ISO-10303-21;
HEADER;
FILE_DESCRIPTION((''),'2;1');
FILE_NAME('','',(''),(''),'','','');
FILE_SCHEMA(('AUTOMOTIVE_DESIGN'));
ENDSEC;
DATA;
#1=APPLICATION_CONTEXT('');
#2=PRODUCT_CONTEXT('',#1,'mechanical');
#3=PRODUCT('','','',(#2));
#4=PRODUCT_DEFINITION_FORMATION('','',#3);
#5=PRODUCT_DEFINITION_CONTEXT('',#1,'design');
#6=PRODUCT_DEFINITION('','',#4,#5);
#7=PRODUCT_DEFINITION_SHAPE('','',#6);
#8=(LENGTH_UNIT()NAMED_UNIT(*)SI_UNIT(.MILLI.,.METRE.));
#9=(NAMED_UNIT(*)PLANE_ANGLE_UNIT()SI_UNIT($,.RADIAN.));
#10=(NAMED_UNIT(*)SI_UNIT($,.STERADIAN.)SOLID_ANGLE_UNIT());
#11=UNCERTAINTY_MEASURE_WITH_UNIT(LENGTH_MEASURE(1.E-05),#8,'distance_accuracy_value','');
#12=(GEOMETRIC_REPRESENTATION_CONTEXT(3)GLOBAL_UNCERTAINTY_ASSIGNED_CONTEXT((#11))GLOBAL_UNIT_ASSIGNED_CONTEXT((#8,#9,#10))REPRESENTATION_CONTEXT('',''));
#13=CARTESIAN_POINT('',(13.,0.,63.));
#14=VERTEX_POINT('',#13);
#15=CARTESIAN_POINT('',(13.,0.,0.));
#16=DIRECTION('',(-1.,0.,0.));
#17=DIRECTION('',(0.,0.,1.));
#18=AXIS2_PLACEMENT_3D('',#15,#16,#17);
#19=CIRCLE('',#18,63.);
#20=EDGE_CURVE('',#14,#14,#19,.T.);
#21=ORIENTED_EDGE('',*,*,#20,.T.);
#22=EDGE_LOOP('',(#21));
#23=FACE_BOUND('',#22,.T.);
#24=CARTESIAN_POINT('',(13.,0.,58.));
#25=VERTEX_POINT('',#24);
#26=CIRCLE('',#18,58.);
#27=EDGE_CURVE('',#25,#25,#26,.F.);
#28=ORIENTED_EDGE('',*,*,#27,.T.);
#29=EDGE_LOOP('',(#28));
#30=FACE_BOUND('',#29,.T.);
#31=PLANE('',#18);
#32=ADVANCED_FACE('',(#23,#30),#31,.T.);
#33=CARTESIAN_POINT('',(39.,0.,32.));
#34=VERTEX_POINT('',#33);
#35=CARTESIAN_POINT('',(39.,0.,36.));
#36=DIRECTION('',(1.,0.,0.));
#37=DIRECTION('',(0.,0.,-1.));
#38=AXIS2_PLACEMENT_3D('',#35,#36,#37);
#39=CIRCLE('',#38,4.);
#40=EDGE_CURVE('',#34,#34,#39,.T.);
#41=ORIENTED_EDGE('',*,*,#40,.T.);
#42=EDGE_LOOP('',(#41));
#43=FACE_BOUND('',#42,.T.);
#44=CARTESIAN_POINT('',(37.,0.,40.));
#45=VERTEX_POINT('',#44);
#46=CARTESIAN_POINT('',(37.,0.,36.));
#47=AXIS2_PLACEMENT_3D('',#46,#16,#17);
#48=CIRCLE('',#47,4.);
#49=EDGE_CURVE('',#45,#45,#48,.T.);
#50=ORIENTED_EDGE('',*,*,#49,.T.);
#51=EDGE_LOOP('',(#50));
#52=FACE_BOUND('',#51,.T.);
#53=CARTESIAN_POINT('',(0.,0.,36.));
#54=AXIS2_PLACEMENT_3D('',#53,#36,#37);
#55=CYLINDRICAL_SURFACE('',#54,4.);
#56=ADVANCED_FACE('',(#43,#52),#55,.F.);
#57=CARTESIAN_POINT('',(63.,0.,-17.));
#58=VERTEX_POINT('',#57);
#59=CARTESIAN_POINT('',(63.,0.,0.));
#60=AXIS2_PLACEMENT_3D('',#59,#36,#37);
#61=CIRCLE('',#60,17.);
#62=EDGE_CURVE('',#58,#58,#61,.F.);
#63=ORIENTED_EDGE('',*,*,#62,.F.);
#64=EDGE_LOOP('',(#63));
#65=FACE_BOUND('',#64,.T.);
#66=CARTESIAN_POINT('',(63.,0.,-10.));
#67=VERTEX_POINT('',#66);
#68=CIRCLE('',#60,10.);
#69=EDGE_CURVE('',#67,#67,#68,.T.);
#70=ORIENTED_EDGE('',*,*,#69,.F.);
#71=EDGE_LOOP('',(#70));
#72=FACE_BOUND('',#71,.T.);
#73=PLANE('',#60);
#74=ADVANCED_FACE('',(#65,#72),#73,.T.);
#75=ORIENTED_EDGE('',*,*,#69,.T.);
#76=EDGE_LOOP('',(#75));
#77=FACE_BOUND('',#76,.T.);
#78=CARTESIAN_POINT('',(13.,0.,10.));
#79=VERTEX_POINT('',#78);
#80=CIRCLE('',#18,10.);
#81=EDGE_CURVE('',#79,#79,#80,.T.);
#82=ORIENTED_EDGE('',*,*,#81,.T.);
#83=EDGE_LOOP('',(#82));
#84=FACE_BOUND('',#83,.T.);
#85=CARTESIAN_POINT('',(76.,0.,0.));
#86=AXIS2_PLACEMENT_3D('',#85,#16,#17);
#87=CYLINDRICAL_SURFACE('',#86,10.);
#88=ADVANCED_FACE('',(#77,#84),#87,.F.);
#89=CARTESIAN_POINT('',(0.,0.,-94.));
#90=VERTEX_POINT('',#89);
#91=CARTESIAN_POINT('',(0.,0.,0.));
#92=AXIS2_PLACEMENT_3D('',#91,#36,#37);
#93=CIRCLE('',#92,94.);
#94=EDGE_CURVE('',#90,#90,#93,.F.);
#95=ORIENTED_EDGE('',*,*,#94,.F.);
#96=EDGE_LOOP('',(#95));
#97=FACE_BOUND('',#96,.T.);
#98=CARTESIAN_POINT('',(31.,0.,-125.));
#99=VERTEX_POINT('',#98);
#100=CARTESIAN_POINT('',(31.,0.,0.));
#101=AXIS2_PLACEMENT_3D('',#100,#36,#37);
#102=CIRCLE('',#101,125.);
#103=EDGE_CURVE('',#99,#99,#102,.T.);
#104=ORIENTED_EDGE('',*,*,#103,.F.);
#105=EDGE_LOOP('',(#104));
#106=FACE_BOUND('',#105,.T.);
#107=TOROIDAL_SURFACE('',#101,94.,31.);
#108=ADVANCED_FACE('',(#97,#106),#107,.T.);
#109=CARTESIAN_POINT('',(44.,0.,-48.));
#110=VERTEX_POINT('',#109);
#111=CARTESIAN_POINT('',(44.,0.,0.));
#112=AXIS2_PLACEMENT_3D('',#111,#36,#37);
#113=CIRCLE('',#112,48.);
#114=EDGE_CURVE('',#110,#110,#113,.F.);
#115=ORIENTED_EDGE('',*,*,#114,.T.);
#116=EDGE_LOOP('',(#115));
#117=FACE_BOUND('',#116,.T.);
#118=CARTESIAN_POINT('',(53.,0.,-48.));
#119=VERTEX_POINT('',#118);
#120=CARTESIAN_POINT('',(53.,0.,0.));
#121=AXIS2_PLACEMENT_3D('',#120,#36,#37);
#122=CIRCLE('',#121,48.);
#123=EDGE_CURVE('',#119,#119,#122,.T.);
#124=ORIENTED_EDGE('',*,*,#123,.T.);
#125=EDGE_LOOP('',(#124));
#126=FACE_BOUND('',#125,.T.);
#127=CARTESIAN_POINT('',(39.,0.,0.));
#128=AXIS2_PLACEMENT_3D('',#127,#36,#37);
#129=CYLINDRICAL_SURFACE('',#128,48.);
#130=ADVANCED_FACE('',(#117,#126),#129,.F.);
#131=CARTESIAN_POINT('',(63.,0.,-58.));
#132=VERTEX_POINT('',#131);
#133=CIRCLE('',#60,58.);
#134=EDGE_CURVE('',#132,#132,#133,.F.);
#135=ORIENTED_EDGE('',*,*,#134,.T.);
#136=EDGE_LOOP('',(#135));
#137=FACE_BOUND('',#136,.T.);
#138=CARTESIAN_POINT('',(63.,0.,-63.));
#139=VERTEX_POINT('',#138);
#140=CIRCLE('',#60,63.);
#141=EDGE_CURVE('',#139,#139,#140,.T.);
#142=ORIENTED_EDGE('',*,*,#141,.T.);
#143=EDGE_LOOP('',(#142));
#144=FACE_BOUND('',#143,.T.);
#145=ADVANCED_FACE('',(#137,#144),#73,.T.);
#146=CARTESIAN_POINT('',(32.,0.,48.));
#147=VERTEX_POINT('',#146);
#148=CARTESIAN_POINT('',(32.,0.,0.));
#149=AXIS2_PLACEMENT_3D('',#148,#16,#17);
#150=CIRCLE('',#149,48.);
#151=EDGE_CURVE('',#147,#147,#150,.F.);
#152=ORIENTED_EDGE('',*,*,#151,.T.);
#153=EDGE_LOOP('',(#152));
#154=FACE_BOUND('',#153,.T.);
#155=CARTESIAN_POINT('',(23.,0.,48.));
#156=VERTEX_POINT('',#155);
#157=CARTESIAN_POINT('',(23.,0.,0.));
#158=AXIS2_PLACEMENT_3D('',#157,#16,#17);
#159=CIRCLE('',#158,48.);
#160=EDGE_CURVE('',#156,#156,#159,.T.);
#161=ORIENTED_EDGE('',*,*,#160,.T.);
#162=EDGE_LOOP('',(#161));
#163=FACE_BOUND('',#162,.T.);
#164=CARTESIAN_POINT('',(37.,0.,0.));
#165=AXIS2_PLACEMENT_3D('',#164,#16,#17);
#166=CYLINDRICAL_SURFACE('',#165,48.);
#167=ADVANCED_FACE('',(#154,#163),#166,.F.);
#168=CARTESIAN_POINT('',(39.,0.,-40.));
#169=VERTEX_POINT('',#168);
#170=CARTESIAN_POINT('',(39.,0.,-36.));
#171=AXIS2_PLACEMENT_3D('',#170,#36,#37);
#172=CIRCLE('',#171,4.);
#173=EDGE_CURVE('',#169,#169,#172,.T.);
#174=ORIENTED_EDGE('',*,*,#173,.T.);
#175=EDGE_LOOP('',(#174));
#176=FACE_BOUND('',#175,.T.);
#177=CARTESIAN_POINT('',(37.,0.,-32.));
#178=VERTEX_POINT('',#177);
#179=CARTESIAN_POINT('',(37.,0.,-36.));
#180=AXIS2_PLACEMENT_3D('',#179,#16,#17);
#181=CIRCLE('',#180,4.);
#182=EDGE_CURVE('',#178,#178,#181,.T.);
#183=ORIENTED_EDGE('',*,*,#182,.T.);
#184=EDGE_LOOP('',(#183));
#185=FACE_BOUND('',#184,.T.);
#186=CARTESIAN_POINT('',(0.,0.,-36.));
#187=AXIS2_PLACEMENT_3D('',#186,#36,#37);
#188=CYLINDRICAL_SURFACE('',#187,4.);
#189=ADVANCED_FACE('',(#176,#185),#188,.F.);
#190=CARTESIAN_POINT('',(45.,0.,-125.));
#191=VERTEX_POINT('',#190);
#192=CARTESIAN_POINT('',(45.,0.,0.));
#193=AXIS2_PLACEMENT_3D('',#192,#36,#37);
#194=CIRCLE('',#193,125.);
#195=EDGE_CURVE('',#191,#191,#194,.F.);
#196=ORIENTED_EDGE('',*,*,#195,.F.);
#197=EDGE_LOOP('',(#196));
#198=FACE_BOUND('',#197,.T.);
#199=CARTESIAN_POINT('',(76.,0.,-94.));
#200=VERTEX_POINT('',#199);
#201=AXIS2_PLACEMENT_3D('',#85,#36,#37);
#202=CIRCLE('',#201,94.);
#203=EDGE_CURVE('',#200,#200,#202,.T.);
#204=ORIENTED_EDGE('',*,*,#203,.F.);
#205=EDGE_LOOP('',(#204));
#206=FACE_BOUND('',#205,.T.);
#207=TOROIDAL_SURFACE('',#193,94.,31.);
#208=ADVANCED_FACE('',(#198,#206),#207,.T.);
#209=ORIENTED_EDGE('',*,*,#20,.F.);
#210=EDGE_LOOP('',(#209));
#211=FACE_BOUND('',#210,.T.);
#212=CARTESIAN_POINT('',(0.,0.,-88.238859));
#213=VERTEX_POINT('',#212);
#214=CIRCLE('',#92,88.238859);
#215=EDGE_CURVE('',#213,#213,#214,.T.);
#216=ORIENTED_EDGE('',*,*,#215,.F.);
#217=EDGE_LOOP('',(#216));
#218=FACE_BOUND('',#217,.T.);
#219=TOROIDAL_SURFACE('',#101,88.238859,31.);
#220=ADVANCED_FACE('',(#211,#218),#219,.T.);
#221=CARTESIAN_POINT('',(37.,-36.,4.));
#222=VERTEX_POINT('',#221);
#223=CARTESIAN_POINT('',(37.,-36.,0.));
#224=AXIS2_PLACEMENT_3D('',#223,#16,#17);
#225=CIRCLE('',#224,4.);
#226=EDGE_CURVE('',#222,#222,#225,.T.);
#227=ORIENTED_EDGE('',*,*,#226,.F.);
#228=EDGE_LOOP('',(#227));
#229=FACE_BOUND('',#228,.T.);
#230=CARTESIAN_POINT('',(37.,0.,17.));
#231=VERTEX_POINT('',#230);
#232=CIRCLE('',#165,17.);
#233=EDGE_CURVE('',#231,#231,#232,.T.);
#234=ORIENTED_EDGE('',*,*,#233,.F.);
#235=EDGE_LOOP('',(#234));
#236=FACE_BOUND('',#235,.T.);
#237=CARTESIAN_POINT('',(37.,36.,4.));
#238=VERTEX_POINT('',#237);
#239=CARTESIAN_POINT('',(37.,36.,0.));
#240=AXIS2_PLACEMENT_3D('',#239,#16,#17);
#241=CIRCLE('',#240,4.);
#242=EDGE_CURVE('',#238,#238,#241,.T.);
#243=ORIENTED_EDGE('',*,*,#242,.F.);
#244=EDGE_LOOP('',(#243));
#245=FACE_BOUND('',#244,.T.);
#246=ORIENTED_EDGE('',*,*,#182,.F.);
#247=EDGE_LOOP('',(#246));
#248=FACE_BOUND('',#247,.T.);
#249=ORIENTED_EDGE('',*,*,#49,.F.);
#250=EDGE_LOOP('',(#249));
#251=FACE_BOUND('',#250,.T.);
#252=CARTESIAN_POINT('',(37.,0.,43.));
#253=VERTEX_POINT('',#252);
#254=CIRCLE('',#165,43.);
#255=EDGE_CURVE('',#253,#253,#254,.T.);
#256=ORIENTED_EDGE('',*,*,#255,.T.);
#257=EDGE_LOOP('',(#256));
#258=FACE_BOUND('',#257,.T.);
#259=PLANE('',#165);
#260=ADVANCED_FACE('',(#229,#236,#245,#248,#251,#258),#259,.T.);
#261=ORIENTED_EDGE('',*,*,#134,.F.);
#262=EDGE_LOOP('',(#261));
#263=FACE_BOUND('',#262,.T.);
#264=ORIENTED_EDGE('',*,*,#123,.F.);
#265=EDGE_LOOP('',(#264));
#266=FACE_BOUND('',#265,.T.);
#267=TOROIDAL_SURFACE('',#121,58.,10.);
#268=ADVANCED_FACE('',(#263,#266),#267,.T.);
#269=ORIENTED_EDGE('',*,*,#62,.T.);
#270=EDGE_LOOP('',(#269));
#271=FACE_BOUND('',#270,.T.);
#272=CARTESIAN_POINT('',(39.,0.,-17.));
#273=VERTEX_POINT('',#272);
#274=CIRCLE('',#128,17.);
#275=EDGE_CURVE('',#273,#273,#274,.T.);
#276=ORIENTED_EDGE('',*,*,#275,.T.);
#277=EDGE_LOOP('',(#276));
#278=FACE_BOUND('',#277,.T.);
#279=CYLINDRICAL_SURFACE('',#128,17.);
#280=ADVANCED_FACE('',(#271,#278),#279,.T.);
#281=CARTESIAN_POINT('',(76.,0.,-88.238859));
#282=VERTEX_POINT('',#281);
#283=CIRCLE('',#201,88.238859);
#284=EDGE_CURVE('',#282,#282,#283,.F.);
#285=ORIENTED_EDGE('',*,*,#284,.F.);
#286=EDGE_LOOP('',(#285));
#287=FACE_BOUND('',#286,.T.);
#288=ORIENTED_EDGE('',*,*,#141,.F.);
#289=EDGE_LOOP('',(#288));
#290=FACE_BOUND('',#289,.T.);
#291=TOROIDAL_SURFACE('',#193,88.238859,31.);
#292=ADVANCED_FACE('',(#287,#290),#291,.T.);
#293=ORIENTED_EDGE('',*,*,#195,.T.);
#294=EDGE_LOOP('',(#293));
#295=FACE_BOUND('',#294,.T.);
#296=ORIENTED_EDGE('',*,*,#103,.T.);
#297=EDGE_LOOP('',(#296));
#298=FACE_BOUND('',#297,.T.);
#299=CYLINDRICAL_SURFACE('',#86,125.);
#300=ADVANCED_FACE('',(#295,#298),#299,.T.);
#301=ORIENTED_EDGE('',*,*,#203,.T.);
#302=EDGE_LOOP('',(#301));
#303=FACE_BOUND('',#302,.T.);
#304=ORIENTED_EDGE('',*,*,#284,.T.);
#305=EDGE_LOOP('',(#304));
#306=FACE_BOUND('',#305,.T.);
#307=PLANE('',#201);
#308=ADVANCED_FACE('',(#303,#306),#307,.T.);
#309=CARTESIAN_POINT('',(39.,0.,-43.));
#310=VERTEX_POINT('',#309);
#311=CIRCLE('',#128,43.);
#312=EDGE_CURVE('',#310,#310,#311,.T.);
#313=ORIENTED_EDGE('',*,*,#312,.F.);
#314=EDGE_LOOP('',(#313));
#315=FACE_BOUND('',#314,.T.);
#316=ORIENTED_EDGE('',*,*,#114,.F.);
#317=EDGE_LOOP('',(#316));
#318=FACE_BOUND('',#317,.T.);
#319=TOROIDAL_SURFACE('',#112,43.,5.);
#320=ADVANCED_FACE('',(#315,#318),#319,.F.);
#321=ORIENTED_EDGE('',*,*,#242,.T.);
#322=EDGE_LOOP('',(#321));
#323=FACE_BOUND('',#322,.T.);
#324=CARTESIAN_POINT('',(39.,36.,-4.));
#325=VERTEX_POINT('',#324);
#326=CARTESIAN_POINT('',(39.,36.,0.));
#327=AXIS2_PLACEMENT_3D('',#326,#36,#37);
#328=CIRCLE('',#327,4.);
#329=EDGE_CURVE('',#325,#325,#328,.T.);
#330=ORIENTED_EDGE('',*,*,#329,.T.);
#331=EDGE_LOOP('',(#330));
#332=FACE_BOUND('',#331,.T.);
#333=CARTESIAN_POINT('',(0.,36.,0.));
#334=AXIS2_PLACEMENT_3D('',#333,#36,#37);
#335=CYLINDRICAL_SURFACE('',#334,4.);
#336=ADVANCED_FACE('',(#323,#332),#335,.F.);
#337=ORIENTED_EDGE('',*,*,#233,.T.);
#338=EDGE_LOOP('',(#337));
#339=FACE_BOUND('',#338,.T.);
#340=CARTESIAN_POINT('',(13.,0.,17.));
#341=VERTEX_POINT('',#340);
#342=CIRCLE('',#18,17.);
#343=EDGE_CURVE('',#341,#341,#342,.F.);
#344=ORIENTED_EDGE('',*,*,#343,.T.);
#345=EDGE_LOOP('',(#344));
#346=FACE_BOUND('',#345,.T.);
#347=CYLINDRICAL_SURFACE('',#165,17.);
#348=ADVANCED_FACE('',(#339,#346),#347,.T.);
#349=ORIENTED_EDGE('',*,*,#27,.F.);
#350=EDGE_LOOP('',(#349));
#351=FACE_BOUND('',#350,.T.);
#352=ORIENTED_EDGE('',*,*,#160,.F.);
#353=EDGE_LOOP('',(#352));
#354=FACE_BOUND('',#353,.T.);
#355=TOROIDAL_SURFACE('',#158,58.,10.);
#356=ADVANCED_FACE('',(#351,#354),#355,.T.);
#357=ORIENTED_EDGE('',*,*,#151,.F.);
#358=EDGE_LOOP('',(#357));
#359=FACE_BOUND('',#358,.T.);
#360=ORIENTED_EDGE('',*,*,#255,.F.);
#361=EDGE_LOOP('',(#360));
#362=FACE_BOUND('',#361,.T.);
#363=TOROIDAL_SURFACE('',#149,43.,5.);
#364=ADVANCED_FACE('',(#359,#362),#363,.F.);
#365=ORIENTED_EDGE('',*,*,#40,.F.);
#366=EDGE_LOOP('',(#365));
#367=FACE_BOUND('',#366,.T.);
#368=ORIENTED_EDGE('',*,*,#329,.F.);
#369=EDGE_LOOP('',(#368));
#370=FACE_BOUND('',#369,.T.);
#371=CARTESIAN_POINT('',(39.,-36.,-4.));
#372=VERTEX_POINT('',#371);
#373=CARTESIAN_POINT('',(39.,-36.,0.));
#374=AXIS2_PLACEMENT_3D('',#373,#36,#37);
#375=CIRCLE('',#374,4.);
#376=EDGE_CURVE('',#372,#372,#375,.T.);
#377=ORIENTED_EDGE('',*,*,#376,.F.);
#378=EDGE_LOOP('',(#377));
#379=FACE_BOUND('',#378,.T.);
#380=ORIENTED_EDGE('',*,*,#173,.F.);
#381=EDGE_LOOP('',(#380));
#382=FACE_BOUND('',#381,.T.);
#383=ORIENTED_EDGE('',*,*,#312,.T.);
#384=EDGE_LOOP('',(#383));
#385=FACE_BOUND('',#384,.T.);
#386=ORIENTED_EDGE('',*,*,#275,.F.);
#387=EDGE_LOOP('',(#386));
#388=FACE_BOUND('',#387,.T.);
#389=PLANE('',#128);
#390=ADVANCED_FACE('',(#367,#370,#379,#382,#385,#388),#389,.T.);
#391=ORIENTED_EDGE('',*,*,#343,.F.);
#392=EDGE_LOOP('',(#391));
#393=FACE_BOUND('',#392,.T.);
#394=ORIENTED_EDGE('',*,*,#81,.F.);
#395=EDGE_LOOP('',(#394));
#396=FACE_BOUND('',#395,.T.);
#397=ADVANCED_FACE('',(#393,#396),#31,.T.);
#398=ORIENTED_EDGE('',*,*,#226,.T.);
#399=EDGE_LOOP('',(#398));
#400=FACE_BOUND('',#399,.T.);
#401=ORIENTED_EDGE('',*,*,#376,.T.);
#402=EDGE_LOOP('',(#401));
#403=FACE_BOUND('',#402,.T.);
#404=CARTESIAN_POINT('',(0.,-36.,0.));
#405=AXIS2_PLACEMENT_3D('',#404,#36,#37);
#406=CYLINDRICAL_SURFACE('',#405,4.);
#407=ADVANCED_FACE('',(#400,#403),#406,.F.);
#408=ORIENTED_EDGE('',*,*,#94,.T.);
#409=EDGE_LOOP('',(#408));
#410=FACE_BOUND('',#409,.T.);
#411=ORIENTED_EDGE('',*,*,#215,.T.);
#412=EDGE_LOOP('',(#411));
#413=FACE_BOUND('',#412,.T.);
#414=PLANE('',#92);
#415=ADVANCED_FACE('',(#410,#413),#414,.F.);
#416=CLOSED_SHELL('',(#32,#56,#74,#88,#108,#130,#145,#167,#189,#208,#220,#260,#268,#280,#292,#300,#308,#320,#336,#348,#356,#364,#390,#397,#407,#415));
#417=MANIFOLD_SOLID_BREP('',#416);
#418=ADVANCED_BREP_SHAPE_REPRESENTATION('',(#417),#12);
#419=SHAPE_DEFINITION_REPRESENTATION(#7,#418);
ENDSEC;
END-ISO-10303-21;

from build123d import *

# Parameters (mm, degrees)
SKETCH1_R           = 125
SKETCH1_R_2         = 10
BOSS_EXTRUDE1_DEPTH = 76
SKETCH2_R           = 48
SKETCH2_R_2         = 17
CUT_EXTRUDE1_DEPTH  = 37
CUT_EXTRUDE2_START  = -37
SKETCH3_R           = 48
SKETCH3_R_2         = 17
CUT_EXTRUDE2_DEPTH  = 37
SKETCH4_R           = 63
CUT_EXTRUDE3_DEPTH  = 13
CUT_EXTRUDE4_START  = -13
SKETCH5_R           = 63
CUT_EXTRUDE4_DEPTH  = 13
SKETCH6_R           = 4
CUT_EXTRUDE5_DEPTH  = 182.027622202
FILLET1_R           = 31
FILLET2_R           = 31
FILLET3_R           = 10
FILLET4_R           = 5


with BuildPart() as part:
    # Sketch1 → Boss-Extrude1 (new body)
    with BuildSketch(Plane(origin=(0, 0, 0), x_dir=(0, 0, -1), z_dir=(1, 0, 0))):
        Circle(SKETCH1_R)
        Circle(SKETCH1_R_2, mode=Mode.SUBTRACT)
    extrude(amount=BOSS_EXTRUDE1_DEPTH)

    # Sketch2 → Cut-Extrude1 (cut)
    with BuildSketch(Plane(origin=(76, 0, 0), x_dir=(0, 0, -1), z_dir=(1, 0, 0))):
        Circle(SKETCH2_R)
        Circle(SKETCH2_R_2, mode=Mode.SUBTRACT)
    extrude(amount=-CUT_EXTRUDE1_DEPTH, mode=Mode.SUBTRACT)

    # Sketch3 → Cut-Extrude2 (cut)
    with BuildSketch(Plane.ZY.offset(CUT_EXTRUDE2_START)):
        with Locations(Location((0, 0, 0), (0, 0, 180))):
            Circle(SKETCH3_R)
        with Locations(Location((0, 0, 0), (0, 0, 180))):
            Circle(SKETCH3_R_2, mode=Mode.SUBTRACT)
    extrude(amount=CUT_EXTRUDE2_DEPTH, mode=Mode.SUBTRACT)

    # Sketch4 → Cut-Extrude3 (cut)
    with BuildSketch(Plane.ZY):
        Circle(SKETCH4_R)
    extrude(amount=-CUT_EXTRUDE3_DEPTH, mode=Mode.SUBTRACT)

    # Sketch5 → Cut-Extrude4 (cut)
    with BuildSketch(Plane(origin=(76, 0, 0), x_dir=(0, 0, -1), z_dir=(1, 0, 0)).offset(CUT_EXTRUDE4_START)):
        with Locations(Location((0, 0, 0), (0, 0, 180))):
            Circle(SKETCH5_R)
    extrude(amount=CUT_EXTRUDE4_DEPTH, mode=Mode.SUBTRACT)

    # Sketch6 → Cut-Extrude5 (cut, through all)
    with BuildSketch(Plane(origin=(39, 0, 0), x_dir=(0, 0, -1), z_dir=(1, 0, 0))):
        with Locations((0, 36)):
            Circle(SKETCH6_R)
        with Locations((36, 0)):
            Circle(SKETCH6_R)
        with Locations((0, -36)):
            Circle(SKETCH6_R)
        with Locations((-36, 0)):
            Circle(SKETCH6_R)
    extrude(amount=-CUT_EXTRUDE5_DEPTH, mode=Mode.SUBTRACT)

    # Fillet1
    # the kernel refuses this fillet: 31 mm, written as the material it takes off along each edge
    with BuildSketch(Plane(origin=(76, 0, 0), x_dir=(0, 0, 1), z_dir=(0, 1, 0))) as fillet1_piece_1:
        with BuildLine():
            CenterArc((88.238858928, -31), FILLET1_R, 90, 54.50406735)
            Line((63, -13), (62.495222821, -12.64))
            ThreePointArc((62.495222821, -12.64), (62.38, -6.5), (62.38, 0))
            Line((62.38, 0), (63, 0.62))
            Line((63, 0.62), (88.238858928, 0.62))
            Line((88.238858928, 0.62), (88.238858928, 0))
        make_face()
    revolve(axis=Axis((76, 0, 0), (1, 0, 0)), mode=Mode.SUBTRACT)
    with BuildSketch(Plane(origin=(76, 0, 0), x_dir=(0, 0, -1), z_dir=(0, -1, 0))) as fillet1_piece_2:
        with BuildLine():
            CenterArc((125 - FILLET1_R, -FILLET1_R), FILLET1_R, 0, 90)
            Line((125 - FILLET1_R, 0), (125 - FILLET1_R, FILLET1_R * 0.02))
            Line((125 - FILLET1_R, FILLET1_R * 0.02), (125 + FILLET1_R * 0.02, FILLET1_R * 0.02))
            Line((125 + FILLET1_R * 0.02, FILLET1_R * 0.02), (125 + FILLET1_R * 0.02, -FILLET1_R))
            Line((125 + FILLET1_R * 0.02, -FILLET1_R), (125, -FILLET1_R))
        make_face()
    revolve(axis=Axis((76, 0, 0), (1, 0, 0)), mode=Mode.SUBTRACT)

    # Fillet2
    # the kernel refuses this fillet: 31 mm, written as the material it takes off along each edge
    with BuildSketch(Plane(origin=(0, 0, 0), x_dir=(0, 0, -1), z_dir=(0, -1, 0))) as fillet2_piece_1:
        with BuildLine():
            CenterArc((125 - FILLET2_R, FILLET2_R), FILLET2_R, 270, 90)
            Line((125 - FILLET2_R, 0), (125 - FILLET2_R, -FILLET2_R * 0.02))
            Line((125 - FILLET2_R, -FILLET2_R * 0.02), (125 + FILLET2_R * 0.02, -FILLET2_R * 0.02))
            Line((125 + FILLET2_R * 0.02, -FILLET2_R * 0.02), (125 + FILLET2_R * 0.02, FILLET2_R))
            Line((125 + FILLET2_R * 0.02, FILLET2_R), (125, FILLET2_R))
        make_face()
    revolve(axis=Axis((0, 0, 0), (1, 0, 0)), mode=Mode.SUBTRACT)
    with BuildSketch(Plane(origin=(0, 0, 0), x_dir=(0, 0, 1), z_dir=(0, -1, 0))) as fillet2_piece_2:
        with BuildLine():
            CenterArc((88.238858928, -31), FILLET2_R, 90, 54.50406735)
            Line((63, -13), (62.495222821, -12.64))
            ThreePointArc((62.495222821, -12.64), (62.38, -6.5), (62.38, 0))
            Line((62.38, 0), (63, 0.62))
            Line((63, 0.62), (88.238858928, 0.62))
            Line((88.238858928, 0.62), (88.238858928, 0))
        make_face()
    revolve(axis=Axis((0, 0, 0), (-1, 0, 0)), mode=Mode.SUBTRACT)

    # Fillet3
    fillet3_edges = [part.edges().sort_by_distance(p)[0] for p in [
        (13, 0, 48),
        (63, 0, 48),
    ]]
    fillet(fillet3_edges, radius=FILLET3_R)

    # Fillet4
    fillet4_edges = [part.edges().sort_by_distance(p)[0] for p in [
        (39, 0, 48),
        (37, 0, 48),
    ]]
    fillet(fillet4_edges, radius=FILLET4_R)


solid = part.part
